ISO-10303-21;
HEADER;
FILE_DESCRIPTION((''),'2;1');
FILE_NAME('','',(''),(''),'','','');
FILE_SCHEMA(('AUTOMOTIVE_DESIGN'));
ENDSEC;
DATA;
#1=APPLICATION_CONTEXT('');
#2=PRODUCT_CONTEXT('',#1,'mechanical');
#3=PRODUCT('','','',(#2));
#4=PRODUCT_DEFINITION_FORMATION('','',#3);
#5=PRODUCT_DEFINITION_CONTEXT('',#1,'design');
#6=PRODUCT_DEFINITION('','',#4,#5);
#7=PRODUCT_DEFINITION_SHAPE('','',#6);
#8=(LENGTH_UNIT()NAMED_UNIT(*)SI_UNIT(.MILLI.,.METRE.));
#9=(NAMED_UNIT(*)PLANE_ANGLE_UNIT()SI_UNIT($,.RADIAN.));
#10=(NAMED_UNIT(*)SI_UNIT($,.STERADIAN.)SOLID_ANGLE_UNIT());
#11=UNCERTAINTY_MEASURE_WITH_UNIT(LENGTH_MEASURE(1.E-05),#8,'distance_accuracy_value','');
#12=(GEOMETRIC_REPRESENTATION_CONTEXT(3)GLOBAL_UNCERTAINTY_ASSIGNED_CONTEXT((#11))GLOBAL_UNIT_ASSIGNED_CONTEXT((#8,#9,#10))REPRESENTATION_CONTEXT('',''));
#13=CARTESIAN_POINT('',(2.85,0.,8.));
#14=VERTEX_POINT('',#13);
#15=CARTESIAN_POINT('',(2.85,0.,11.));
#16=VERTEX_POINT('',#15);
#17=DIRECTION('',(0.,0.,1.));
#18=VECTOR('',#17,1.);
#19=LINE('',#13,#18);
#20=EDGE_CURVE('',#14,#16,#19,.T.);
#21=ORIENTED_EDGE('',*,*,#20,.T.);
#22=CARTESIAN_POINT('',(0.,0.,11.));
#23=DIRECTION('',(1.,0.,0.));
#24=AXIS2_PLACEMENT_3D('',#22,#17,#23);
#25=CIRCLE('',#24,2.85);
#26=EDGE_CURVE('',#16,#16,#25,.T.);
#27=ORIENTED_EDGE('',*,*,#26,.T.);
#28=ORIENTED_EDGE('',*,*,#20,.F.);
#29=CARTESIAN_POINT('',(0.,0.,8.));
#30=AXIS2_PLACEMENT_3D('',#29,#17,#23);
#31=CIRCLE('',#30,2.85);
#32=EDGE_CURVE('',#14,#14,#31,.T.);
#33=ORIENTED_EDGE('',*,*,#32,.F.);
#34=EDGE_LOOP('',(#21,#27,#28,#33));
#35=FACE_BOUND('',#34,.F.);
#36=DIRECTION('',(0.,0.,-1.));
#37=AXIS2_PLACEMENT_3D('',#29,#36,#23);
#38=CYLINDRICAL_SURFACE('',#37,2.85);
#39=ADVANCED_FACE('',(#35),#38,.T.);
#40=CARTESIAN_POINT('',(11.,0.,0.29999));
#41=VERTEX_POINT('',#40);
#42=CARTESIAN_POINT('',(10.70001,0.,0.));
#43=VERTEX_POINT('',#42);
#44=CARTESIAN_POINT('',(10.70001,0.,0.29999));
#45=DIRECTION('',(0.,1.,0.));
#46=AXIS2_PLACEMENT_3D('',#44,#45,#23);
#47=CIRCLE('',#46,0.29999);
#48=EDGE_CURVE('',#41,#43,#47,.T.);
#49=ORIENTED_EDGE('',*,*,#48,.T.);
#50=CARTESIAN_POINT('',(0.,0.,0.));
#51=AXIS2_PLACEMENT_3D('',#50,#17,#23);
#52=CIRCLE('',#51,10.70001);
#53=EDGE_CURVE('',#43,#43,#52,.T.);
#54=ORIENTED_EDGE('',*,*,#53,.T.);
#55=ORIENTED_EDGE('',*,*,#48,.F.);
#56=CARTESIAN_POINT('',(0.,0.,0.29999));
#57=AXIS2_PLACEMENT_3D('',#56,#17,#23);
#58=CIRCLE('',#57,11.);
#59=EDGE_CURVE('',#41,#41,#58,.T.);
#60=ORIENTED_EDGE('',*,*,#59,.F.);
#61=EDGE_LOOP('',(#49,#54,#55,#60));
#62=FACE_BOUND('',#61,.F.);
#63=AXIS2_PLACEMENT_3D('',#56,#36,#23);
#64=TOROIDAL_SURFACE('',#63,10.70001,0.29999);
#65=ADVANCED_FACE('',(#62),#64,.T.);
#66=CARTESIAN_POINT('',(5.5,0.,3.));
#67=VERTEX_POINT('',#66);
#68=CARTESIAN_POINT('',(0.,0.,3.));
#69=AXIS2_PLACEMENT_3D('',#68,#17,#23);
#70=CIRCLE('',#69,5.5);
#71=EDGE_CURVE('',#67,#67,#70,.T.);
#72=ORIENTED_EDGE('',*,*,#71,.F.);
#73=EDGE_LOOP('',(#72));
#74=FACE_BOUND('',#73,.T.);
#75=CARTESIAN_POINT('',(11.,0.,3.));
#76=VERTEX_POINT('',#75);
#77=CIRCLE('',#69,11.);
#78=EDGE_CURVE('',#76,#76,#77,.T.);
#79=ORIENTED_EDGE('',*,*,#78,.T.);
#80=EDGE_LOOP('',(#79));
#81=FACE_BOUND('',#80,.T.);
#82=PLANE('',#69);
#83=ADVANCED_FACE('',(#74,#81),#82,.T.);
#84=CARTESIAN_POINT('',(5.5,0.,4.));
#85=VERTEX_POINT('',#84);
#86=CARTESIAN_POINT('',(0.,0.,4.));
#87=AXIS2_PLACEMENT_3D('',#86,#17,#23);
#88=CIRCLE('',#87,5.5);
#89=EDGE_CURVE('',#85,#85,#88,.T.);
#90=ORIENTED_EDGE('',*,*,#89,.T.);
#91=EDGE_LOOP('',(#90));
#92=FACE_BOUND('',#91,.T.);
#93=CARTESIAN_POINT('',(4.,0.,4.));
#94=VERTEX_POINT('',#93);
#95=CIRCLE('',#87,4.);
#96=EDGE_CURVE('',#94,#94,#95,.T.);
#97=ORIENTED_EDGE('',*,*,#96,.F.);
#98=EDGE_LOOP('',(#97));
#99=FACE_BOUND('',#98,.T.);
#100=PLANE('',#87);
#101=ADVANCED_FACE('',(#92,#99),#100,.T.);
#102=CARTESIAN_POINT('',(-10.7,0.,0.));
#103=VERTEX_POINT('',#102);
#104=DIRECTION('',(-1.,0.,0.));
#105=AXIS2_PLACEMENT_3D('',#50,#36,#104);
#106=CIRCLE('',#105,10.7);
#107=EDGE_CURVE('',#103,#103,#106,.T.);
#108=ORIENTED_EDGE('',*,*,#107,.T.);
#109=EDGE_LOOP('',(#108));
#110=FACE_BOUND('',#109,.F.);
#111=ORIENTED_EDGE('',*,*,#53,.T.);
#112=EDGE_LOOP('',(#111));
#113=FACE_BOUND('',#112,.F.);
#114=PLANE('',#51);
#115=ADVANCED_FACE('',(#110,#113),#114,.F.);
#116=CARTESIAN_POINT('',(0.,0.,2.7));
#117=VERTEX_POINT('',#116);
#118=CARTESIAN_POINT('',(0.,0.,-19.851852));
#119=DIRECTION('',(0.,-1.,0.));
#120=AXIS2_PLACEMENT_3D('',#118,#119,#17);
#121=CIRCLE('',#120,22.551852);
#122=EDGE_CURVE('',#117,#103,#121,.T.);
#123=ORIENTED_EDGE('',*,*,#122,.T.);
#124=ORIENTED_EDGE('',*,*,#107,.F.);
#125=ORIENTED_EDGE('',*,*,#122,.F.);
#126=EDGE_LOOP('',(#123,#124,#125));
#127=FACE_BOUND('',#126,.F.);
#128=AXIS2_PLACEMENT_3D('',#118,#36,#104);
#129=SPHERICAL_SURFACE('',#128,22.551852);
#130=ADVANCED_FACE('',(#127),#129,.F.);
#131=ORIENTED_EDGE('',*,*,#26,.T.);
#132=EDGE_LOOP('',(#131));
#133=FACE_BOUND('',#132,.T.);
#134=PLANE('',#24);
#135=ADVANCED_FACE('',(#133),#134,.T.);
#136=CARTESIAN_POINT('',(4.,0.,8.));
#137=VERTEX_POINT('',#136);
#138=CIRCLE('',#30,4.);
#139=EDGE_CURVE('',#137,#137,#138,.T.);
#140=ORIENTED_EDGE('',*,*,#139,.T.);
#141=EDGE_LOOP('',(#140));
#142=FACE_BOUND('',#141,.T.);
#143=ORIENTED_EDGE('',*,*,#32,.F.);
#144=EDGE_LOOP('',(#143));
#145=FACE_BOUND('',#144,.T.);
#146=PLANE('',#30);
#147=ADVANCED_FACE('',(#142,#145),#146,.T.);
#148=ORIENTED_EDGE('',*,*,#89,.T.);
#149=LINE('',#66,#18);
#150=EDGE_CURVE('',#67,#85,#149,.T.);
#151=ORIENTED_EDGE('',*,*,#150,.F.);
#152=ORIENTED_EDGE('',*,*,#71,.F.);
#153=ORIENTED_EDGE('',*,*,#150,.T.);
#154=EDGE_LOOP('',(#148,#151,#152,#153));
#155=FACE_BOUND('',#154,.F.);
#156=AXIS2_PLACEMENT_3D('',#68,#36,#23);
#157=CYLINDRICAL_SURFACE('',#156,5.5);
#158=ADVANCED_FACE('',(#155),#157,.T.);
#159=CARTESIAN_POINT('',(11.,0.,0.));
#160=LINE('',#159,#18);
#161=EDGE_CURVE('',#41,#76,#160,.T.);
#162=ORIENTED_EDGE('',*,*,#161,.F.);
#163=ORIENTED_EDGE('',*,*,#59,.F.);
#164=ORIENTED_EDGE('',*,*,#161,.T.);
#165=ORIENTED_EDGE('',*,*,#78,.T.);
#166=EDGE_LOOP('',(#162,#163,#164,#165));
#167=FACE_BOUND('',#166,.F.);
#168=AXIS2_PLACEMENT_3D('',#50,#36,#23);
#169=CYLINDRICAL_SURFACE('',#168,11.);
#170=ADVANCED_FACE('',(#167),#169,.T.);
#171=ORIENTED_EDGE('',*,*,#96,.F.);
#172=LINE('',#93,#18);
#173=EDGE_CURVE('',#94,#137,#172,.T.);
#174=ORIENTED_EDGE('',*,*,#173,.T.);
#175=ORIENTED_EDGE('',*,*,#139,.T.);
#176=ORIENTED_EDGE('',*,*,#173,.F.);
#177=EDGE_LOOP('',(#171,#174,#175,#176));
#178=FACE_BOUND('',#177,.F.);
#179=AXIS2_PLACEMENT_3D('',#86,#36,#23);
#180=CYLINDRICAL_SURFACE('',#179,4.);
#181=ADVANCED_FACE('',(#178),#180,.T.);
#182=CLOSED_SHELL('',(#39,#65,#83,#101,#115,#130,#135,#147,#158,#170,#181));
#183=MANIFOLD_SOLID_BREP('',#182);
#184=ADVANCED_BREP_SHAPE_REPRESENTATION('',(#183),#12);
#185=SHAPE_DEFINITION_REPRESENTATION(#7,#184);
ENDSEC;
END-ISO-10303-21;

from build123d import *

# Parameters (mm, degrees)
F0_R      = 11
F1_DEPTH  = 3
F5_R      = 5.5
F6_DEPTH  = 1
F7_R      = 4
F8_DEPTH  = 4
F9_R      = 2.85
F10_DEPTH = 3
F11_R     = 0.29999


# Not quite as in the source:
# - a fillet or chamfer is up to 0.001 mm smaller than in the source, because OpenCascade refuses the exact size


with BuildPart() as f1:
    # F0 (on Top) → F1 (new body)
    with BuildSketch(Plane.XY):
        Circle(F0_R)
    extrude(amount=F1_DEPTH)

    # F3 (on Front) → F4 (revolve, cut)
    with BuildSketch(Plane.XZ):
        with BuildLine():
            Line((0, -42.4037037037), (0, 2.7))
            ThreePointArc((0, 2.7), (-22.5518518519, -19.8518518519), (0, -42.4037037037))
        make_face()
    revolve(axis=Axis((0, 0, -19.8518518519), (0, 0, -1)), mode=Mode.SUBTRACT)

    # F5 (on face) → F6 (join)
    with BuildSketch(Plane.XY.offset(3)):
        Circle(F5_R)
    extrude(amount=F6_DEPTH)

    # F7 (on face) → F8 (join)
    with BuildSketch(Plane.XY.offset(4)):
        Circle(F7_R)
    extrude(amount=F8_DEPTH)

    # F9 (on face) → F10 (join)
    with BuildSketch(Plane.XY.offset(8)):
        Circle(F9_R)
    extrude(amount=F10_DEPTH)

    # F11 (radius 0.3 in the source; OpenCascade refuses exactly that, so slightly less here)
    f11_edges = [f1.edges().sort_by_distance(p)[0] for p in [
        (-11, 0, 0),
    ]]
    fillet(f11_edges, radius=F11_R)


solid = f1.part
